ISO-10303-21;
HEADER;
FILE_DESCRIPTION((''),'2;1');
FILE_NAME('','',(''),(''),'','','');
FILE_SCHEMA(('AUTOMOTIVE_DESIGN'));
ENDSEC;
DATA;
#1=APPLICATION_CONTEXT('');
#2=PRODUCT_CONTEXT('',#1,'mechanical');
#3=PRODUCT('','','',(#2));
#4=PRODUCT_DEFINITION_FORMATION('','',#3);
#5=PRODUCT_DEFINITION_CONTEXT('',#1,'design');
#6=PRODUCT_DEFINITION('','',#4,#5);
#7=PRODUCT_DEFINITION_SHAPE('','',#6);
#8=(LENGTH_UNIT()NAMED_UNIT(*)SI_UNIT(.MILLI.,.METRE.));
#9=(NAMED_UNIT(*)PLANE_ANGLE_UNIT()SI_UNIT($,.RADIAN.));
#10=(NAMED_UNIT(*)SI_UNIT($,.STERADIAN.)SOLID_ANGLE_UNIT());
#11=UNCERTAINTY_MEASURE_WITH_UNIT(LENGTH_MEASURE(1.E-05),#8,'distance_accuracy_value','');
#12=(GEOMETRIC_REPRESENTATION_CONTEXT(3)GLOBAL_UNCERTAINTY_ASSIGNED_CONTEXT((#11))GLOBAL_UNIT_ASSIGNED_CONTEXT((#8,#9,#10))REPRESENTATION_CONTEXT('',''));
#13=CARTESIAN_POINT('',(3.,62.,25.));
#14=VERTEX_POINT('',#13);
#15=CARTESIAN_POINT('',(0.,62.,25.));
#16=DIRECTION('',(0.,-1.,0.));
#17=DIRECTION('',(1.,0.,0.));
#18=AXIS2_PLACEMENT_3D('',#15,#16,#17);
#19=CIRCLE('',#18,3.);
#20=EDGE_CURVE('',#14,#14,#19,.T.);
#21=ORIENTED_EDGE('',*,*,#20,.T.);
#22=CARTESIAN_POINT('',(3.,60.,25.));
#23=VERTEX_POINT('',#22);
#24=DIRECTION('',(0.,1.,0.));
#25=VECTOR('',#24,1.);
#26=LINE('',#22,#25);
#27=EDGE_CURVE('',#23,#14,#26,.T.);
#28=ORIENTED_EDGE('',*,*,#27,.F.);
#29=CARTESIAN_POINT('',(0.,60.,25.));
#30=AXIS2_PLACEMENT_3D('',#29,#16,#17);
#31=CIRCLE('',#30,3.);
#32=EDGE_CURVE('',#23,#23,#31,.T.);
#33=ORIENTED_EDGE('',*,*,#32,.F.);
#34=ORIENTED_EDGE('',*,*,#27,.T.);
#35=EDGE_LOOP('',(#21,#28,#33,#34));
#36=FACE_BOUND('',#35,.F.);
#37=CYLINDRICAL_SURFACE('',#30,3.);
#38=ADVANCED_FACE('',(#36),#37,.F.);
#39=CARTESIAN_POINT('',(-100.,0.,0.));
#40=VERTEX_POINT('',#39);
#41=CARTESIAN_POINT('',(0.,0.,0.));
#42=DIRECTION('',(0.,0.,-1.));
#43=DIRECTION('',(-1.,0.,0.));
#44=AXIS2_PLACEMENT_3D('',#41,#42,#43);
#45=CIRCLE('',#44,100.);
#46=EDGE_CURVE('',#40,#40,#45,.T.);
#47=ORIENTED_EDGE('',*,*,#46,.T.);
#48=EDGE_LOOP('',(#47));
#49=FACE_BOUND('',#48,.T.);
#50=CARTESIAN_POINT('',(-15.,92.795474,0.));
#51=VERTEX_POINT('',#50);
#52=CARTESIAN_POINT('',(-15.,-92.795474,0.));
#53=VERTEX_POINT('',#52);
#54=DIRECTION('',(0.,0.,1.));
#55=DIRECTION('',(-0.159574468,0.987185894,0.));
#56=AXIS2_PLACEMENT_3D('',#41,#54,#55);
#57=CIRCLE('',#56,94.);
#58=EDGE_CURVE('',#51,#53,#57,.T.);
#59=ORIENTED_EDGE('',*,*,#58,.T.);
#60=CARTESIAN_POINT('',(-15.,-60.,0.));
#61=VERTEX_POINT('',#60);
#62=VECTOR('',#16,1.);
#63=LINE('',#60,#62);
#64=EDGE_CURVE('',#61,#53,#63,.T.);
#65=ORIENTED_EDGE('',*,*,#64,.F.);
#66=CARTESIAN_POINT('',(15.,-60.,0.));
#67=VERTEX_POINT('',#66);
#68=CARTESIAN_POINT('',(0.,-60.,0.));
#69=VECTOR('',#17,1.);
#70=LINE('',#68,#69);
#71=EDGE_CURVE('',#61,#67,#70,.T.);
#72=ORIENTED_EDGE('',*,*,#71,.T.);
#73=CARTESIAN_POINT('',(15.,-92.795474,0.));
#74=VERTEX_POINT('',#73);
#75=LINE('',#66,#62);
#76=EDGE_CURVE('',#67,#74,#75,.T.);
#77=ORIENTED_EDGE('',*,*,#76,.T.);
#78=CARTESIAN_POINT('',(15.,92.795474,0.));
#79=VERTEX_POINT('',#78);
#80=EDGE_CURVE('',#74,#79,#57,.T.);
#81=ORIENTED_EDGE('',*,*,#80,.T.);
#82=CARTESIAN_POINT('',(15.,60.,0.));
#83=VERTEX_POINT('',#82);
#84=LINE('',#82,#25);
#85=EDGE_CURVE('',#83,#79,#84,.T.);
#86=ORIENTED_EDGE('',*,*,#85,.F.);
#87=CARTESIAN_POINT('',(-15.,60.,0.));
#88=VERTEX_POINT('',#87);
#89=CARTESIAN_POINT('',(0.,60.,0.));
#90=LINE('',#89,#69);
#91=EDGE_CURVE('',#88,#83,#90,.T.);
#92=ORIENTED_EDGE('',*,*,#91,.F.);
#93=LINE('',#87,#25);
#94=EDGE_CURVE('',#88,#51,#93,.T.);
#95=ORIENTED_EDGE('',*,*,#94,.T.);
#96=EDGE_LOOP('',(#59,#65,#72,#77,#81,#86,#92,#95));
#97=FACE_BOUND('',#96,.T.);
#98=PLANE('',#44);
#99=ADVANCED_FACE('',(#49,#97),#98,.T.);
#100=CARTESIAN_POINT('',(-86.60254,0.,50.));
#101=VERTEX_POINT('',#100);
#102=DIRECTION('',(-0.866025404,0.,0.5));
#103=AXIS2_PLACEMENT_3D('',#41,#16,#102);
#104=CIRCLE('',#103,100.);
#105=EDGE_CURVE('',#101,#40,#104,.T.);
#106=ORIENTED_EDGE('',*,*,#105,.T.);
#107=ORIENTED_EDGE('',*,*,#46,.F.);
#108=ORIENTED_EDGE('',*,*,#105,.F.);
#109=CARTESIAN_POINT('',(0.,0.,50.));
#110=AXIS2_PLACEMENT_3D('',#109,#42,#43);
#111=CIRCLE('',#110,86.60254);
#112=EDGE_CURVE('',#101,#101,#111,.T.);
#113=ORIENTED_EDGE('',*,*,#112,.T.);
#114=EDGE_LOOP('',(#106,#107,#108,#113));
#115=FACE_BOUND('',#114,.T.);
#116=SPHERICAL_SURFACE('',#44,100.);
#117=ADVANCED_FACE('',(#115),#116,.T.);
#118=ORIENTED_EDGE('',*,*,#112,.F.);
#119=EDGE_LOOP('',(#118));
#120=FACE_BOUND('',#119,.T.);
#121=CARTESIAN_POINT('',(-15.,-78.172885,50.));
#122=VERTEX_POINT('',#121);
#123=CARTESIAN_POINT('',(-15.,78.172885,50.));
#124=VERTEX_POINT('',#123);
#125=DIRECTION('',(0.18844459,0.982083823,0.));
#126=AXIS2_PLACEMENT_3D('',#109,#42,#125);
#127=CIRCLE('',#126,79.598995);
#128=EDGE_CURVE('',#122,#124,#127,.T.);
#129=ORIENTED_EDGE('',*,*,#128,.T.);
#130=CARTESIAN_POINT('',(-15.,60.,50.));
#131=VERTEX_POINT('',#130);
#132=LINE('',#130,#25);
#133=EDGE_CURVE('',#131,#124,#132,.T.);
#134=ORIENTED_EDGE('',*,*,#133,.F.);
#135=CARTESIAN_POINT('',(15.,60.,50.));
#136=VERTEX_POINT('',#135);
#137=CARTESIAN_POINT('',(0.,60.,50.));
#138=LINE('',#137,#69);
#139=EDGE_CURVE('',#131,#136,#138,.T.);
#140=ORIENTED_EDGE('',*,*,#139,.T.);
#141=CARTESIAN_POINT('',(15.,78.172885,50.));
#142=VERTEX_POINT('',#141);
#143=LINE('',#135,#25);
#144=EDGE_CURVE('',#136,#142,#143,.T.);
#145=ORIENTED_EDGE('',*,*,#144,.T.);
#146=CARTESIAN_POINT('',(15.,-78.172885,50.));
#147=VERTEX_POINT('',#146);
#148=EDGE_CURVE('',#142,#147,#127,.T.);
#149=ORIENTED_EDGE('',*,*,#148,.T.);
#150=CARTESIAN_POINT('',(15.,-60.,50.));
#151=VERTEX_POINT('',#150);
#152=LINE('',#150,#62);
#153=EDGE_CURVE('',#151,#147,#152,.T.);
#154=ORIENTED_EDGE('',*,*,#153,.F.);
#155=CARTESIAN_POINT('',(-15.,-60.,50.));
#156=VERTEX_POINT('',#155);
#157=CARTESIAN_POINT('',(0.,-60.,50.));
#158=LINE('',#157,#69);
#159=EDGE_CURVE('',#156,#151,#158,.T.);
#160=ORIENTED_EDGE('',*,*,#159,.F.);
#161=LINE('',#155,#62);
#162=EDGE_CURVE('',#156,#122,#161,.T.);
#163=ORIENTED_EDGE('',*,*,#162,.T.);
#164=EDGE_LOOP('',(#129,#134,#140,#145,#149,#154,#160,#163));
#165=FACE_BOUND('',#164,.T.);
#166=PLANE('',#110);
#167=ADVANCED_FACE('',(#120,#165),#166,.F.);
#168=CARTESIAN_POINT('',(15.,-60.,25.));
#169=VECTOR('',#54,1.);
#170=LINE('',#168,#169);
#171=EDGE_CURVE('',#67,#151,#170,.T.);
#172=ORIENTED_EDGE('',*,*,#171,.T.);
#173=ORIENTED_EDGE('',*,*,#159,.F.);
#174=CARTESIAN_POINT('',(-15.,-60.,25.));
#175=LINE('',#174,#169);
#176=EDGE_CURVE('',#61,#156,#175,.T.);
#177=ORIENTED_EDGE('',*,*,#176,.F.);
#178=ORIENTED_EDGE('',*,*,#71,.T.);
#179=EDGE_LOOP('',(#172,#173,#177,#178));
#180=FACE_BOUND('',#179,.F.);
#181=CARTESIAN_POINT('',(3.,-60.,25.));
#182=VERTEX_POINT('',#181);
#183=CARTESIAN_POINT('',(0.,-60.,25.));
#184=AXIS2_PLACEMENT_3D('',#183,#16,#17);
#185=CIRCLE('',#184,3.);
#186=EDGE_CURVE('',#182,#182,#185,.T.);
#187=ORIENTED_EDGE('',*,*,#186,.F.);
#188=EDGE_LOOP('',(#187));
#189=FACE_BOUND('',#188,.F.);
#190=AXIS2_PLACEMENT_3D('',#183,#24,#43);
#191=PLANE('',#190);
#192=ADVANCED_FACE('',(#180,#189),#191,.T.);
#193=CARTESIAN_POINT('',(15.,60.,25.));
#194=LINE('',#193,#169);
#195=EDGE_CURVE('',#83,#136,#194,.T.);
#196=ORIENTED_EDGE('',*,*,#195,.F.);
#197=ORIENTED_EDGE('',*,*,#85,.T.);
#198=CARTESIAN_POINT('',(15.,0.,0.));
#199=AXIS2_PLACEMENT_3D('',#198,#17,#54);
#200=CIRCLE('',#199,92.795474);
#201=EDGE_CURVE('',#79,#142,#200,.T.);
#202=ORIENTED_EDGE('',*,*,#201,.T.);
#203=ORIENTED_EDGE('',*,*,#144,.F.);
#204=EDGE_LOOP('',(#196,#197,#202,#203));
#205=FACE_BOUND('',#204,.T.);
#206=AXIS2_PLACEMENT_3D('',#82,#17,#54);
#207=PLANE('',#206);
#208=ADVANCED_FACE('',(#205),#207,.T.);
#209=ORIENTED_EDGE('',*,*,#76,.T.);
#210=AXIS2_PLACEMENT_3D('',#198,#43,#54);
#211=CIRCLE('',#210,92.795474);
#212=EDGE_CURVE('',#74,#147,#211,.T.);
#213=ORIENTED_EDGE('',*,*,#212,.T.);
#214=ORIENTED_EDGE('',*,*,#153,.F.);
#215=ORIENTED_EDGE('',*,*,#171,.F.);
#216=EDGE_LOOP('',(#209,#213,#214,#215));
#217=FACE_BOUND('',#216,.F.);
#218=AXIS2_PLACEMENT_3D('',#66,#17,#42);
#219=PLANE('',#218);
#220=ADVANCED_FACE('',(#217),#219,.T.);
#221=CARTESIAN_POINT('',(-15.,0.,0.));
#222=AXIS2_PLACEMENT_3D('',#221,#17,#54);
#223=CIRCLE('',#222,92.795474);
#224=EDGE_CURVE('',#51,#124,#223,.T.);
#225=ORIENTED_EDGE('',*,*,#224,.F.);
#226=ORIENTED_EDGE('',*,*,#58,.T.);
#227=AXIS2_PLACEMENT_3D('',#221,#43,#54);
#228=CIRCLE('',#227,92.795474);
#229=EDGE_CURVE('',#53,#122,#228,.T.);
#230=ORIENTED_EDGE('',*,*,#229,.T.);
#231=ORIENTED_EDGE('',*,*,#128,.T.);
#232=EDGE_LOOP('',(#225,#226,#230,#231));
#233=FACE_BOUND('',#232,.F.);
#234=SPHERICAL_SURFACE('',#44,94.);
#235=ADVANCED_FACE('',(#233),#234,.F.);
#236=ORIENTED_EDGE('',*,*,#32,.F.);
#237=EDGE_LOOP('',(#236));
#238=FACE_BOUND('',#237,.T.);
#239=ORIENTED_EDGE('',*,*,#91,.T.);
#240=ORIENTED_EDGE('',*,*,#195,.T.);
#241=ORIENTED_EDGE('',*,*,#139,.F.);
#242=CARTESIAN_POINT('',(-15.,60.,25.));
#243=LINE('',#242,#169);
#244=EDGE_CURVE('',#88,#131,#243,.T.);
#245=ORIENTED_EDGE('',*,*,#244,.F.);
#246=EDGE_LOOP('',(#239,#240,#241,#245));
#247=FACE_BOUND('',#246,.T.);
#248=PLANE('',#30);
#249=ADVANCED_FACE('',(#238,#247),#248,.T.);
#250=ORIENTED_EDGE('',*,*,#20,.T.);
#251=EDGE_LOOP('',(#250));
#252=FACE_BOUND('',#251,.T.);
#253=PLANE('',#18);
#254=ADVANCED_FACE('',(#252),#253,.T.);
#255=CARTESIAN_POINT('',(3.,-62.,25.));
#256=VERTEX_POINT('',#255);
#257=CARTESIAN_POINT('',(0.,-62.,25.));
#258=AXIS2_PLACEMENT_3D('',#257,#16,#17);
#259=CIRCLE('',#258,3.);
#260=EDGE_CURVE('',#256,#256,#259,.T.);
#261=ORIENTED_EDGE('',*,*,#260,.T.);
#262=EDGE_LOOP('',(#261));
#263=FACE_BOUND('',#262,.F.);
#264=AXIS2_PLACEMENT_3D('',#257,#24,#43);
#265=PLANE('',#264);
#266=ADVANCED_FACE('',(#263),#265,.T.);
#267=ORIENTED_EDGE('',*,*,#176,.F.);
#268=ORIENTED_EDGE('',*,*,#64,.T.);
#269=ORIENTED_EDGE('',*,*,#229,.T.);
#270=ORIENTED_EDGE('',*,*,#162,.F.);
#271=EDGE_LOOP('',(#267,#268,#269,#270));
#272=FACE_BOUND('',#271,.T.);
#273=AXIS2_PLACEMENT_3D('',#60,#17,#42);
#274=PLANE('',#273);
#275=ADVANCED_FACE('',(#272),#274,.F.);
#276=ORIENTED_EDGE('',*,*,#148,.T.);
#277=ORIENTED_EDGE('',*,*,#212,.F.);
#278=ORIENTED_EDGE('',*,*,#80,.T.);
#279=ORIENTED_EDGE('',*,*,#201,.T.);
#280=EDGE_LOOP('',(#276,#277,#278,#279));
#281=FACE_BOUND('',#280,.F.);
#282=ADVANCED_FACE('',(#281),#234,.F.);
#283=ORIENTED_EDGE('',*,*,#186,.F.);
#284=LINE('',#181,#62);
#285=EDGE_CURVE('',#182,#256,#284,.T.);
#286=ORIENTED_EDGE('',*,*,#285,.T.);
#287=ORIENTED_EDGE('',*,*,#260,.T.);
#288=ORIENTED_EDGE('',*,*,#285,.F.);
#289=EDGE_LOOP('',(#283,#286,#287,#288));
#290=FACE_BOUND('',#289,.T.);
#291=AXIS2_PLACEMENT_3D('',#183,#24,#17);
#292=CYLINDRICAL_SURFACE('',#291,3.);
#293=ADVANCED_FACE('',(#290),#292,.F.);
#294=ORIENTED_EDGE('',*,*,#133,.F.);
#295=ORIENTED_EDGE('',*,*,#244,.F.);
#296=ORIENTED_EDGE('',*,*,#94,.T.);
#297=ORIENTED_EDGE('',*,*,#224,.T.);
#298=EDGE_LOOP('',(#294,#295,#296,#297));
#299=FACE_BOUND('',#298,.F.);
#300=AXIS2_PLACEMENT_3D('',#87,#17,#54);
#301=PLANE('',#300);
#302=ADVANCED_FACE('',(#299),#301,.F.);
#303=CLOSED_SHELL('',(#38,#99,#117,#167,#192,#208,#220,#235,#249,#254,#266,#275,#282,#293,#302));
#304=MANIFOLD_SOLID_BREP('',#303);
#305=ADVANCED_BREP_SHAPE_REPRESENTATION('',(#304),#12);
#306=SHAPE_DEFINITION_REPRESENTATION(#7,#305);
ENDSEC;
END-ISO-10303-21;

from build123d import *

# Parameters (mm, degrees)
F2_T     = -6
F4_W     = 30
F4_H     = 50
F6_R     = 3
F7_DEPTH = 2


# Not quite as in the source:
# - a pattern or mirror of a feature is missing from the dataset's text; its kind, count and spacing are read off the source's solid


with BuildPart() as f1:
    # F0 (on Front) → F1 (revolve)
    with BuildSketch(Plane.XZ):
        with BuildLine():
            Line((0, 50), (-86.6025403784, 50))
            ThreePointArc((-86.6025403784, 50), (-96.5925826289, 25.8819045103), (-100, 0))
            Line((-100, 0), (0, 0))
            Line((0, 0), (0, 50))
        make_face()
    revolve(axis=Axis((0, 0, 25), (0, 0, -1)))

    # F2
    f2_openings = [f1.faces().sort_by_distance(p)[0] for p in [
        (0, 0, 50),
        (0, 0, 0),
    ]]
    offset(amount=F2_T, openings=f2_openings)

    # F4 (on offset) → F5 (join, up to the next surface of F1)
    with BuildSketch(Plane.XZ.offset(-60)):
        with Locations((0, 25)):
            Rectangle(F4_W, F4_H)
    f5 = extrude(until=Until.NEXT, dir=(0, 1, 0))

    # F5_copies: F5 across plane
    add(f5.mirror(Plane(origin=(0, 0, 0), x_dir=(0, 0, -1), z_dir=(0, -1, 0))))

    # F6 (on face) → F7 (cut)
    with BuildSketch(Plane.XZ.offset(-60)):
        with Locations((0, 25)):
            Circle(F6_R)
    f7 = extrude(amount=-F7_DEPTH, mode=Mode.SUBTRACT)

    # F7_copies: F7 across plane
    add(f7.mirror(Plane(origin=(0, 0, 0), x_dir=(0, 0, -1), z_dir=(0, -1, 0))), mode=Mode.SUBTRACT)


solid = f1.part
